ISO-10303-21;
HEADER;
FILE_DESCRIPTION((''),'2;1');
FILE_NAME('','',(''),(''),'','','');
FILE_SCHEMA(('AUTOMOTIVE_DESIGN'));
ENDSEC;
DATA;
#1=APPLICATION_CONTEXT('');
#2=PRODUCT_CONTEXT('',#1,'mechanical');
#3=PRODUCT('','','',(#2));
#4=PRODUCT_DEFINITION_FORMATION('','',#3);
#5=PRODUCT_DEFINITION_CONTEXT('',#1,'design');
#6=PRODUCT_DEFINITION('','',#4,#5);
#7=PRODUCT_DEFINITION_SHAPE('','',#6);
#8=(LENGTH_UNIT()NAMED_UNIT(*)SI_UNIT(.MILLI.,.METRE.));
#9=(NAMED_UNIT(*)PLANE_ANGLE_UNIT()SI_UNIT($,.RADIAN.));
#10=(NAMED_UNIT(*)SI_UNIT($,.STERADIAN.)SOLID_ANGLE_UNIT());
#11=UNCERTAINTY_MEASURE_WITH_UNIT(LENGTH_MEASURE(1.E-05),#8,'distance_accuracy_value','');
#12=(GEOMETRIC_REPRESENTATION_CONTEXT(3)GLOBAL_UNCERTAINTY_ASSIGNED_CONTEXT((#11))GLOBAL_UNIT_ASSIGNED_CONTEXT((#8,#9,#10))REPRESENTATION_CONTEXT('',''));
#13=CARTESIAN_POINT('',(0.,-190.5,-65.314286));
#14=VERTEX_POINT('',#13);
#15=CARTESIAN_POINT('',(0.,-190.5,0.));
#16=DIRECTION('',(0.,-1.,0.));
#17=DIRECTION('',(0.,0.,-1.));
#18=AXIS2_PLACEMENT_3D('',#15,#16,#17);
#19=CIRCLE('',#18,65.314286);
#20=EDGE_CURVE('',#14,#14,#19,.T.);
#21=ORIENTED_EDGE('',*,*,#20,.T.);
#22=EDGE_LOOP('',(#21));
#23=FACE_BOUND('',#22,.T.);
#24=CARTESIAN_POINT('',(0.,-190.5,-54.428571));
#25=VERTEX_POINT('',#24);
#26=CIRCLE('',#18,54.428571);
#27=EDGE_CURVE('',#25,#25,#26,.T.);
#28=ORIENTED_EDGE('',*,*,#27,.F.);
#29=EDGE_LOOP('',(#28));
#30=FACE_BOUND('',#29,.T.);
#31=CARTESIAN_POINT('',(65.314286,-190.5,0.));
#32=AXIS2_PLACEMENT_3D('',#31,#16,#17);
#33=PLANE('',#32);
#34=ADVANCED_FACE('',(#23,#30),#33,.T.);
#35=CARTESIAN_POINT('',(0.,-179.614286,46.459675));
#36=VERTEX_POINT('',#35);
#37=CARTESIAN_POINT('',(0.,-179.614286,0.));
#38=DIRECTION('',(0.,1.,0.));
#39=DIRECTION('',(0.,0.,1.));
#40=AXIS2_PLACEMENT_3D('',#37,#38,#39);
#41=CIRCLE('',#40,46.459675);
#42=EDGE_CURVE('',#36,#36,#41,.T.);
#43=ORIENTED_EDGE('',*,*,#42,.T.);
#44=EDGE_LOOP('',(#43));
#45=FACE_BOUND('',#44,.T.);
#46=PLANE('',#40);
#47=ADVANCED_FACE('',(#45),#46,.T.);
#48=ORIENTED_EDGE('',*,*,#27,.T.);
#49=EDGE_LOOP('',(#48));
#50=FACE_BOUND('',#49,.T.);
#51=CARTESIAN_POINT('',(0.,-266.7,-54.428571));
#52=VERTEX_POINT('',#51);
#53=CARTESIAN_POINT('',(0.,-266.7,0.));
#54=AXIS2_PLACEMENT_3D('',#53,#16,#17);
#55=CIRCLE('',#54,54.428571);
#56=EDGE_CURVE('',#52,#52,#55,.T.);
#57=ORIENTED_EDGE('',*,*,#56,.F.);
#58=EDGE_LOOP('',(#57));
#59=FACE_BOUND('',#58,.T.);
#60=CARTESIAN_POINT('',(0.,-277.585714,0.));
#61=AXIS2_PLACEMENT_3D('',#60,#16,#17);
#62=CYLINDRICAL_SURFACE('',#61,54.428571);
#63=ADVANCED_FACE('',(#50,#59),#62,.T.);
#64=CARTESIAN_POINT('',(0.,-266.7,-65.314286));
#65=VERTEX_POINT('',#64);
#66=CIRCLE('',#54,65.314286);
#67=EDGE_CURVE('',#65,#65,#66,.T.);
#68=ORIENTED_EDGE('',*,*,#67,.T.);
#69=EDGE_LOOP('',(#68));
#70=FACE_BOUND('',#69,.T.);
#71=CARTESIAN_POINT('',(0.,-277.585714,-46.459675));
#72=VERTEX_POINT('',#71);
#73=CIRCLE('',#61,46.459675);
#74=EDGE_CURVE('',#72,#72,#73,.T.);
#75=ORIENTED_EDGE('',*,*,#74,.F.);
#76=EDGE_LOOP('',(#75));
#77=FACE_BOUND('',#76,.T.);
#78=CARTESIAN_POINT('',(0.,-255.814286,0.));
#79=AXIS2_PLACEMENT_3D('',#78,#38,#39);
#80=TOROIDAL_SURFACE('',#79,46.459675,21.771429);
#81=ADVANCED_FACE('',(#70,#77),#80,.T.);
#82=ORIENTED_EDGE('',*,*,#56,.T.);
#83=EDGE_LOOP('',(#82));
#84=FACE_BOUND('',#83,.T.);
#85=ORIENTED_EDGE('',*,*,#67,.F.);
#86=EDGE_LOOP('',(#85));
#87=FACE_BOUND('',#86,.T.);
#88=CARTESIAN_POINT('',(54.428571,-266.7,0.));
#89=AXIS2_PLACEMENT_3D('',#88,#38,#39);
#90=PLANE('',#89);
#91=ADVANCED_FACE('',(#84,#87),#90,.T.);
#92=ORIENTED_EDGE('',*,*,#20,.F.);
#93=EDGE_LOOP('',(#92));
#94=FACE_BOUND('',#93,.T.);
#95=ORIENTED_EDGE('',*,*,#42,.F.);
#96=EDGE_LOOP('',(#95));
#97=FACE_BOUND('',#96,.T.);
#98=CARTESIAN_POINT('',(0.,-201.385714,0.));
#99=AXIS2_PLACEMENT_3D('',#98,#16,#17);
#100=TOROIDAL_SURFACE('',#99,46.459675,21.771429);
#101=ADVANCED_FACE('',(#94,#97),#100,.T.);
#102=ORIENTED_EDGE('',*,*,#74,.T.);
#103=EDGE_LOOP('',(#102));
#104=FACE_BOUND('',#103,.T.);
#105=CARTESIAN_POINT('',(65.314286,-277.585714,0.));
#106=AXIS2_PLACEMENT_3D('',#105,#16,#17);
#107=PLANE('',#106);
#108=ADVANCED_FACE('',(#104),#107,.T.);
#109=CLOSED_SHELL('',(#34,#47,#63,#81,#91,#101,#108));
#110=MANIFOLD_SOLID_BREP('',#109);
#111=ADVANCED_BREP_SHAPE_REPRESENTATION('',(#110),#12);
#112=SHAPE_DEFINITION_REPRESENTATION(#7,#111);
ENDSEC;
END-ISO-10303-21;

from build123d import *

# Parameters (mm, degrees)
FILLET1_R    = 101.6
SCALE1_SCALE = 0.214285714


with BuildPart() as part:
    # Sketch2 → Revolve1 (revolve)
    with BuildSketch(Plane.XY, mode=Mode.PRIVATE) as revolve1_sk:
        Polygon((0, 0), (304.8, 0), (304.8, -50.8), (254, -50.8), (254, -406.4), (304.8, -406.4), (304.8, -457.2), (0, -457.2), align=None)
    revolve(revolve1_sk.sketch.rotate(Axis((0, -457.2, 0), (0, 1, 0)), 90), axis=Axis((0, -457.2, 0), (0, 1, 0)))

    # Fillet1
    # the kernel refuses this fillet: 101.6 mm, written as the material it takes off along each edge
    with BuildSketch(Plane(origin=(0, -457.2, 0), x_dir=(0, 0, -1), z_dir=(1, 0, 0))) as fillet1_piece_1:
        with BuildLine():
            CenterArc((216.811818975, 101.6), FILLET1_R, 270, 60)
            Line((216.811818975, 0), (216.811818975, -2.032))
            Line((216.811818975, -2.032), (304.8, -2.032))
            Line((304.8, -2.032), (306.832, 0))
            ThreePointArc((306.832, 0), (306.832, 25.4), (306.55976362, 49.784))
            Line((306.55976362, 49.784), (304.8, 50.8))
        make_face()
    revolve(axis=Axis((0, -457.2, 0), (0, 1, 0)), mode=Mode.SUBTRACT)
    with BuildSketch(Plane(origin=(0, 0, 0), x_dir=(0, 0, -1), z_dir=(1, 0, 0))) as fillet1_piece_2:
        with BuildLine():
            CenterArc((216.811818975, -101.6), FILLET1_R, 30, 60)
            Line((304.8, -50.8), (306.55976362, -49.784))
            ThreePointArc((306.55976362, -49.784), (306.832, -25.4), (306.832, 0))
            Line((306.832, 0), (304.8, 2.032))
            Line((304.8, 2.032), (216.811818975, 2.032))
            Line((216.811818975, 2.032), (216.811818975, 0))
        make_face()
    revolve(axis=Axis((0, 0, 0), (0, 1, 0)), mode=Mode.SUBTRACT)


with BuildPart() as part_1:
    # Scale1: scaled about (0, -228.6, 0)
    add(part.part.scale(SCALE1_SCALE).moved(Location((0, -179.614285714, 0))))


solid = part_1.part
